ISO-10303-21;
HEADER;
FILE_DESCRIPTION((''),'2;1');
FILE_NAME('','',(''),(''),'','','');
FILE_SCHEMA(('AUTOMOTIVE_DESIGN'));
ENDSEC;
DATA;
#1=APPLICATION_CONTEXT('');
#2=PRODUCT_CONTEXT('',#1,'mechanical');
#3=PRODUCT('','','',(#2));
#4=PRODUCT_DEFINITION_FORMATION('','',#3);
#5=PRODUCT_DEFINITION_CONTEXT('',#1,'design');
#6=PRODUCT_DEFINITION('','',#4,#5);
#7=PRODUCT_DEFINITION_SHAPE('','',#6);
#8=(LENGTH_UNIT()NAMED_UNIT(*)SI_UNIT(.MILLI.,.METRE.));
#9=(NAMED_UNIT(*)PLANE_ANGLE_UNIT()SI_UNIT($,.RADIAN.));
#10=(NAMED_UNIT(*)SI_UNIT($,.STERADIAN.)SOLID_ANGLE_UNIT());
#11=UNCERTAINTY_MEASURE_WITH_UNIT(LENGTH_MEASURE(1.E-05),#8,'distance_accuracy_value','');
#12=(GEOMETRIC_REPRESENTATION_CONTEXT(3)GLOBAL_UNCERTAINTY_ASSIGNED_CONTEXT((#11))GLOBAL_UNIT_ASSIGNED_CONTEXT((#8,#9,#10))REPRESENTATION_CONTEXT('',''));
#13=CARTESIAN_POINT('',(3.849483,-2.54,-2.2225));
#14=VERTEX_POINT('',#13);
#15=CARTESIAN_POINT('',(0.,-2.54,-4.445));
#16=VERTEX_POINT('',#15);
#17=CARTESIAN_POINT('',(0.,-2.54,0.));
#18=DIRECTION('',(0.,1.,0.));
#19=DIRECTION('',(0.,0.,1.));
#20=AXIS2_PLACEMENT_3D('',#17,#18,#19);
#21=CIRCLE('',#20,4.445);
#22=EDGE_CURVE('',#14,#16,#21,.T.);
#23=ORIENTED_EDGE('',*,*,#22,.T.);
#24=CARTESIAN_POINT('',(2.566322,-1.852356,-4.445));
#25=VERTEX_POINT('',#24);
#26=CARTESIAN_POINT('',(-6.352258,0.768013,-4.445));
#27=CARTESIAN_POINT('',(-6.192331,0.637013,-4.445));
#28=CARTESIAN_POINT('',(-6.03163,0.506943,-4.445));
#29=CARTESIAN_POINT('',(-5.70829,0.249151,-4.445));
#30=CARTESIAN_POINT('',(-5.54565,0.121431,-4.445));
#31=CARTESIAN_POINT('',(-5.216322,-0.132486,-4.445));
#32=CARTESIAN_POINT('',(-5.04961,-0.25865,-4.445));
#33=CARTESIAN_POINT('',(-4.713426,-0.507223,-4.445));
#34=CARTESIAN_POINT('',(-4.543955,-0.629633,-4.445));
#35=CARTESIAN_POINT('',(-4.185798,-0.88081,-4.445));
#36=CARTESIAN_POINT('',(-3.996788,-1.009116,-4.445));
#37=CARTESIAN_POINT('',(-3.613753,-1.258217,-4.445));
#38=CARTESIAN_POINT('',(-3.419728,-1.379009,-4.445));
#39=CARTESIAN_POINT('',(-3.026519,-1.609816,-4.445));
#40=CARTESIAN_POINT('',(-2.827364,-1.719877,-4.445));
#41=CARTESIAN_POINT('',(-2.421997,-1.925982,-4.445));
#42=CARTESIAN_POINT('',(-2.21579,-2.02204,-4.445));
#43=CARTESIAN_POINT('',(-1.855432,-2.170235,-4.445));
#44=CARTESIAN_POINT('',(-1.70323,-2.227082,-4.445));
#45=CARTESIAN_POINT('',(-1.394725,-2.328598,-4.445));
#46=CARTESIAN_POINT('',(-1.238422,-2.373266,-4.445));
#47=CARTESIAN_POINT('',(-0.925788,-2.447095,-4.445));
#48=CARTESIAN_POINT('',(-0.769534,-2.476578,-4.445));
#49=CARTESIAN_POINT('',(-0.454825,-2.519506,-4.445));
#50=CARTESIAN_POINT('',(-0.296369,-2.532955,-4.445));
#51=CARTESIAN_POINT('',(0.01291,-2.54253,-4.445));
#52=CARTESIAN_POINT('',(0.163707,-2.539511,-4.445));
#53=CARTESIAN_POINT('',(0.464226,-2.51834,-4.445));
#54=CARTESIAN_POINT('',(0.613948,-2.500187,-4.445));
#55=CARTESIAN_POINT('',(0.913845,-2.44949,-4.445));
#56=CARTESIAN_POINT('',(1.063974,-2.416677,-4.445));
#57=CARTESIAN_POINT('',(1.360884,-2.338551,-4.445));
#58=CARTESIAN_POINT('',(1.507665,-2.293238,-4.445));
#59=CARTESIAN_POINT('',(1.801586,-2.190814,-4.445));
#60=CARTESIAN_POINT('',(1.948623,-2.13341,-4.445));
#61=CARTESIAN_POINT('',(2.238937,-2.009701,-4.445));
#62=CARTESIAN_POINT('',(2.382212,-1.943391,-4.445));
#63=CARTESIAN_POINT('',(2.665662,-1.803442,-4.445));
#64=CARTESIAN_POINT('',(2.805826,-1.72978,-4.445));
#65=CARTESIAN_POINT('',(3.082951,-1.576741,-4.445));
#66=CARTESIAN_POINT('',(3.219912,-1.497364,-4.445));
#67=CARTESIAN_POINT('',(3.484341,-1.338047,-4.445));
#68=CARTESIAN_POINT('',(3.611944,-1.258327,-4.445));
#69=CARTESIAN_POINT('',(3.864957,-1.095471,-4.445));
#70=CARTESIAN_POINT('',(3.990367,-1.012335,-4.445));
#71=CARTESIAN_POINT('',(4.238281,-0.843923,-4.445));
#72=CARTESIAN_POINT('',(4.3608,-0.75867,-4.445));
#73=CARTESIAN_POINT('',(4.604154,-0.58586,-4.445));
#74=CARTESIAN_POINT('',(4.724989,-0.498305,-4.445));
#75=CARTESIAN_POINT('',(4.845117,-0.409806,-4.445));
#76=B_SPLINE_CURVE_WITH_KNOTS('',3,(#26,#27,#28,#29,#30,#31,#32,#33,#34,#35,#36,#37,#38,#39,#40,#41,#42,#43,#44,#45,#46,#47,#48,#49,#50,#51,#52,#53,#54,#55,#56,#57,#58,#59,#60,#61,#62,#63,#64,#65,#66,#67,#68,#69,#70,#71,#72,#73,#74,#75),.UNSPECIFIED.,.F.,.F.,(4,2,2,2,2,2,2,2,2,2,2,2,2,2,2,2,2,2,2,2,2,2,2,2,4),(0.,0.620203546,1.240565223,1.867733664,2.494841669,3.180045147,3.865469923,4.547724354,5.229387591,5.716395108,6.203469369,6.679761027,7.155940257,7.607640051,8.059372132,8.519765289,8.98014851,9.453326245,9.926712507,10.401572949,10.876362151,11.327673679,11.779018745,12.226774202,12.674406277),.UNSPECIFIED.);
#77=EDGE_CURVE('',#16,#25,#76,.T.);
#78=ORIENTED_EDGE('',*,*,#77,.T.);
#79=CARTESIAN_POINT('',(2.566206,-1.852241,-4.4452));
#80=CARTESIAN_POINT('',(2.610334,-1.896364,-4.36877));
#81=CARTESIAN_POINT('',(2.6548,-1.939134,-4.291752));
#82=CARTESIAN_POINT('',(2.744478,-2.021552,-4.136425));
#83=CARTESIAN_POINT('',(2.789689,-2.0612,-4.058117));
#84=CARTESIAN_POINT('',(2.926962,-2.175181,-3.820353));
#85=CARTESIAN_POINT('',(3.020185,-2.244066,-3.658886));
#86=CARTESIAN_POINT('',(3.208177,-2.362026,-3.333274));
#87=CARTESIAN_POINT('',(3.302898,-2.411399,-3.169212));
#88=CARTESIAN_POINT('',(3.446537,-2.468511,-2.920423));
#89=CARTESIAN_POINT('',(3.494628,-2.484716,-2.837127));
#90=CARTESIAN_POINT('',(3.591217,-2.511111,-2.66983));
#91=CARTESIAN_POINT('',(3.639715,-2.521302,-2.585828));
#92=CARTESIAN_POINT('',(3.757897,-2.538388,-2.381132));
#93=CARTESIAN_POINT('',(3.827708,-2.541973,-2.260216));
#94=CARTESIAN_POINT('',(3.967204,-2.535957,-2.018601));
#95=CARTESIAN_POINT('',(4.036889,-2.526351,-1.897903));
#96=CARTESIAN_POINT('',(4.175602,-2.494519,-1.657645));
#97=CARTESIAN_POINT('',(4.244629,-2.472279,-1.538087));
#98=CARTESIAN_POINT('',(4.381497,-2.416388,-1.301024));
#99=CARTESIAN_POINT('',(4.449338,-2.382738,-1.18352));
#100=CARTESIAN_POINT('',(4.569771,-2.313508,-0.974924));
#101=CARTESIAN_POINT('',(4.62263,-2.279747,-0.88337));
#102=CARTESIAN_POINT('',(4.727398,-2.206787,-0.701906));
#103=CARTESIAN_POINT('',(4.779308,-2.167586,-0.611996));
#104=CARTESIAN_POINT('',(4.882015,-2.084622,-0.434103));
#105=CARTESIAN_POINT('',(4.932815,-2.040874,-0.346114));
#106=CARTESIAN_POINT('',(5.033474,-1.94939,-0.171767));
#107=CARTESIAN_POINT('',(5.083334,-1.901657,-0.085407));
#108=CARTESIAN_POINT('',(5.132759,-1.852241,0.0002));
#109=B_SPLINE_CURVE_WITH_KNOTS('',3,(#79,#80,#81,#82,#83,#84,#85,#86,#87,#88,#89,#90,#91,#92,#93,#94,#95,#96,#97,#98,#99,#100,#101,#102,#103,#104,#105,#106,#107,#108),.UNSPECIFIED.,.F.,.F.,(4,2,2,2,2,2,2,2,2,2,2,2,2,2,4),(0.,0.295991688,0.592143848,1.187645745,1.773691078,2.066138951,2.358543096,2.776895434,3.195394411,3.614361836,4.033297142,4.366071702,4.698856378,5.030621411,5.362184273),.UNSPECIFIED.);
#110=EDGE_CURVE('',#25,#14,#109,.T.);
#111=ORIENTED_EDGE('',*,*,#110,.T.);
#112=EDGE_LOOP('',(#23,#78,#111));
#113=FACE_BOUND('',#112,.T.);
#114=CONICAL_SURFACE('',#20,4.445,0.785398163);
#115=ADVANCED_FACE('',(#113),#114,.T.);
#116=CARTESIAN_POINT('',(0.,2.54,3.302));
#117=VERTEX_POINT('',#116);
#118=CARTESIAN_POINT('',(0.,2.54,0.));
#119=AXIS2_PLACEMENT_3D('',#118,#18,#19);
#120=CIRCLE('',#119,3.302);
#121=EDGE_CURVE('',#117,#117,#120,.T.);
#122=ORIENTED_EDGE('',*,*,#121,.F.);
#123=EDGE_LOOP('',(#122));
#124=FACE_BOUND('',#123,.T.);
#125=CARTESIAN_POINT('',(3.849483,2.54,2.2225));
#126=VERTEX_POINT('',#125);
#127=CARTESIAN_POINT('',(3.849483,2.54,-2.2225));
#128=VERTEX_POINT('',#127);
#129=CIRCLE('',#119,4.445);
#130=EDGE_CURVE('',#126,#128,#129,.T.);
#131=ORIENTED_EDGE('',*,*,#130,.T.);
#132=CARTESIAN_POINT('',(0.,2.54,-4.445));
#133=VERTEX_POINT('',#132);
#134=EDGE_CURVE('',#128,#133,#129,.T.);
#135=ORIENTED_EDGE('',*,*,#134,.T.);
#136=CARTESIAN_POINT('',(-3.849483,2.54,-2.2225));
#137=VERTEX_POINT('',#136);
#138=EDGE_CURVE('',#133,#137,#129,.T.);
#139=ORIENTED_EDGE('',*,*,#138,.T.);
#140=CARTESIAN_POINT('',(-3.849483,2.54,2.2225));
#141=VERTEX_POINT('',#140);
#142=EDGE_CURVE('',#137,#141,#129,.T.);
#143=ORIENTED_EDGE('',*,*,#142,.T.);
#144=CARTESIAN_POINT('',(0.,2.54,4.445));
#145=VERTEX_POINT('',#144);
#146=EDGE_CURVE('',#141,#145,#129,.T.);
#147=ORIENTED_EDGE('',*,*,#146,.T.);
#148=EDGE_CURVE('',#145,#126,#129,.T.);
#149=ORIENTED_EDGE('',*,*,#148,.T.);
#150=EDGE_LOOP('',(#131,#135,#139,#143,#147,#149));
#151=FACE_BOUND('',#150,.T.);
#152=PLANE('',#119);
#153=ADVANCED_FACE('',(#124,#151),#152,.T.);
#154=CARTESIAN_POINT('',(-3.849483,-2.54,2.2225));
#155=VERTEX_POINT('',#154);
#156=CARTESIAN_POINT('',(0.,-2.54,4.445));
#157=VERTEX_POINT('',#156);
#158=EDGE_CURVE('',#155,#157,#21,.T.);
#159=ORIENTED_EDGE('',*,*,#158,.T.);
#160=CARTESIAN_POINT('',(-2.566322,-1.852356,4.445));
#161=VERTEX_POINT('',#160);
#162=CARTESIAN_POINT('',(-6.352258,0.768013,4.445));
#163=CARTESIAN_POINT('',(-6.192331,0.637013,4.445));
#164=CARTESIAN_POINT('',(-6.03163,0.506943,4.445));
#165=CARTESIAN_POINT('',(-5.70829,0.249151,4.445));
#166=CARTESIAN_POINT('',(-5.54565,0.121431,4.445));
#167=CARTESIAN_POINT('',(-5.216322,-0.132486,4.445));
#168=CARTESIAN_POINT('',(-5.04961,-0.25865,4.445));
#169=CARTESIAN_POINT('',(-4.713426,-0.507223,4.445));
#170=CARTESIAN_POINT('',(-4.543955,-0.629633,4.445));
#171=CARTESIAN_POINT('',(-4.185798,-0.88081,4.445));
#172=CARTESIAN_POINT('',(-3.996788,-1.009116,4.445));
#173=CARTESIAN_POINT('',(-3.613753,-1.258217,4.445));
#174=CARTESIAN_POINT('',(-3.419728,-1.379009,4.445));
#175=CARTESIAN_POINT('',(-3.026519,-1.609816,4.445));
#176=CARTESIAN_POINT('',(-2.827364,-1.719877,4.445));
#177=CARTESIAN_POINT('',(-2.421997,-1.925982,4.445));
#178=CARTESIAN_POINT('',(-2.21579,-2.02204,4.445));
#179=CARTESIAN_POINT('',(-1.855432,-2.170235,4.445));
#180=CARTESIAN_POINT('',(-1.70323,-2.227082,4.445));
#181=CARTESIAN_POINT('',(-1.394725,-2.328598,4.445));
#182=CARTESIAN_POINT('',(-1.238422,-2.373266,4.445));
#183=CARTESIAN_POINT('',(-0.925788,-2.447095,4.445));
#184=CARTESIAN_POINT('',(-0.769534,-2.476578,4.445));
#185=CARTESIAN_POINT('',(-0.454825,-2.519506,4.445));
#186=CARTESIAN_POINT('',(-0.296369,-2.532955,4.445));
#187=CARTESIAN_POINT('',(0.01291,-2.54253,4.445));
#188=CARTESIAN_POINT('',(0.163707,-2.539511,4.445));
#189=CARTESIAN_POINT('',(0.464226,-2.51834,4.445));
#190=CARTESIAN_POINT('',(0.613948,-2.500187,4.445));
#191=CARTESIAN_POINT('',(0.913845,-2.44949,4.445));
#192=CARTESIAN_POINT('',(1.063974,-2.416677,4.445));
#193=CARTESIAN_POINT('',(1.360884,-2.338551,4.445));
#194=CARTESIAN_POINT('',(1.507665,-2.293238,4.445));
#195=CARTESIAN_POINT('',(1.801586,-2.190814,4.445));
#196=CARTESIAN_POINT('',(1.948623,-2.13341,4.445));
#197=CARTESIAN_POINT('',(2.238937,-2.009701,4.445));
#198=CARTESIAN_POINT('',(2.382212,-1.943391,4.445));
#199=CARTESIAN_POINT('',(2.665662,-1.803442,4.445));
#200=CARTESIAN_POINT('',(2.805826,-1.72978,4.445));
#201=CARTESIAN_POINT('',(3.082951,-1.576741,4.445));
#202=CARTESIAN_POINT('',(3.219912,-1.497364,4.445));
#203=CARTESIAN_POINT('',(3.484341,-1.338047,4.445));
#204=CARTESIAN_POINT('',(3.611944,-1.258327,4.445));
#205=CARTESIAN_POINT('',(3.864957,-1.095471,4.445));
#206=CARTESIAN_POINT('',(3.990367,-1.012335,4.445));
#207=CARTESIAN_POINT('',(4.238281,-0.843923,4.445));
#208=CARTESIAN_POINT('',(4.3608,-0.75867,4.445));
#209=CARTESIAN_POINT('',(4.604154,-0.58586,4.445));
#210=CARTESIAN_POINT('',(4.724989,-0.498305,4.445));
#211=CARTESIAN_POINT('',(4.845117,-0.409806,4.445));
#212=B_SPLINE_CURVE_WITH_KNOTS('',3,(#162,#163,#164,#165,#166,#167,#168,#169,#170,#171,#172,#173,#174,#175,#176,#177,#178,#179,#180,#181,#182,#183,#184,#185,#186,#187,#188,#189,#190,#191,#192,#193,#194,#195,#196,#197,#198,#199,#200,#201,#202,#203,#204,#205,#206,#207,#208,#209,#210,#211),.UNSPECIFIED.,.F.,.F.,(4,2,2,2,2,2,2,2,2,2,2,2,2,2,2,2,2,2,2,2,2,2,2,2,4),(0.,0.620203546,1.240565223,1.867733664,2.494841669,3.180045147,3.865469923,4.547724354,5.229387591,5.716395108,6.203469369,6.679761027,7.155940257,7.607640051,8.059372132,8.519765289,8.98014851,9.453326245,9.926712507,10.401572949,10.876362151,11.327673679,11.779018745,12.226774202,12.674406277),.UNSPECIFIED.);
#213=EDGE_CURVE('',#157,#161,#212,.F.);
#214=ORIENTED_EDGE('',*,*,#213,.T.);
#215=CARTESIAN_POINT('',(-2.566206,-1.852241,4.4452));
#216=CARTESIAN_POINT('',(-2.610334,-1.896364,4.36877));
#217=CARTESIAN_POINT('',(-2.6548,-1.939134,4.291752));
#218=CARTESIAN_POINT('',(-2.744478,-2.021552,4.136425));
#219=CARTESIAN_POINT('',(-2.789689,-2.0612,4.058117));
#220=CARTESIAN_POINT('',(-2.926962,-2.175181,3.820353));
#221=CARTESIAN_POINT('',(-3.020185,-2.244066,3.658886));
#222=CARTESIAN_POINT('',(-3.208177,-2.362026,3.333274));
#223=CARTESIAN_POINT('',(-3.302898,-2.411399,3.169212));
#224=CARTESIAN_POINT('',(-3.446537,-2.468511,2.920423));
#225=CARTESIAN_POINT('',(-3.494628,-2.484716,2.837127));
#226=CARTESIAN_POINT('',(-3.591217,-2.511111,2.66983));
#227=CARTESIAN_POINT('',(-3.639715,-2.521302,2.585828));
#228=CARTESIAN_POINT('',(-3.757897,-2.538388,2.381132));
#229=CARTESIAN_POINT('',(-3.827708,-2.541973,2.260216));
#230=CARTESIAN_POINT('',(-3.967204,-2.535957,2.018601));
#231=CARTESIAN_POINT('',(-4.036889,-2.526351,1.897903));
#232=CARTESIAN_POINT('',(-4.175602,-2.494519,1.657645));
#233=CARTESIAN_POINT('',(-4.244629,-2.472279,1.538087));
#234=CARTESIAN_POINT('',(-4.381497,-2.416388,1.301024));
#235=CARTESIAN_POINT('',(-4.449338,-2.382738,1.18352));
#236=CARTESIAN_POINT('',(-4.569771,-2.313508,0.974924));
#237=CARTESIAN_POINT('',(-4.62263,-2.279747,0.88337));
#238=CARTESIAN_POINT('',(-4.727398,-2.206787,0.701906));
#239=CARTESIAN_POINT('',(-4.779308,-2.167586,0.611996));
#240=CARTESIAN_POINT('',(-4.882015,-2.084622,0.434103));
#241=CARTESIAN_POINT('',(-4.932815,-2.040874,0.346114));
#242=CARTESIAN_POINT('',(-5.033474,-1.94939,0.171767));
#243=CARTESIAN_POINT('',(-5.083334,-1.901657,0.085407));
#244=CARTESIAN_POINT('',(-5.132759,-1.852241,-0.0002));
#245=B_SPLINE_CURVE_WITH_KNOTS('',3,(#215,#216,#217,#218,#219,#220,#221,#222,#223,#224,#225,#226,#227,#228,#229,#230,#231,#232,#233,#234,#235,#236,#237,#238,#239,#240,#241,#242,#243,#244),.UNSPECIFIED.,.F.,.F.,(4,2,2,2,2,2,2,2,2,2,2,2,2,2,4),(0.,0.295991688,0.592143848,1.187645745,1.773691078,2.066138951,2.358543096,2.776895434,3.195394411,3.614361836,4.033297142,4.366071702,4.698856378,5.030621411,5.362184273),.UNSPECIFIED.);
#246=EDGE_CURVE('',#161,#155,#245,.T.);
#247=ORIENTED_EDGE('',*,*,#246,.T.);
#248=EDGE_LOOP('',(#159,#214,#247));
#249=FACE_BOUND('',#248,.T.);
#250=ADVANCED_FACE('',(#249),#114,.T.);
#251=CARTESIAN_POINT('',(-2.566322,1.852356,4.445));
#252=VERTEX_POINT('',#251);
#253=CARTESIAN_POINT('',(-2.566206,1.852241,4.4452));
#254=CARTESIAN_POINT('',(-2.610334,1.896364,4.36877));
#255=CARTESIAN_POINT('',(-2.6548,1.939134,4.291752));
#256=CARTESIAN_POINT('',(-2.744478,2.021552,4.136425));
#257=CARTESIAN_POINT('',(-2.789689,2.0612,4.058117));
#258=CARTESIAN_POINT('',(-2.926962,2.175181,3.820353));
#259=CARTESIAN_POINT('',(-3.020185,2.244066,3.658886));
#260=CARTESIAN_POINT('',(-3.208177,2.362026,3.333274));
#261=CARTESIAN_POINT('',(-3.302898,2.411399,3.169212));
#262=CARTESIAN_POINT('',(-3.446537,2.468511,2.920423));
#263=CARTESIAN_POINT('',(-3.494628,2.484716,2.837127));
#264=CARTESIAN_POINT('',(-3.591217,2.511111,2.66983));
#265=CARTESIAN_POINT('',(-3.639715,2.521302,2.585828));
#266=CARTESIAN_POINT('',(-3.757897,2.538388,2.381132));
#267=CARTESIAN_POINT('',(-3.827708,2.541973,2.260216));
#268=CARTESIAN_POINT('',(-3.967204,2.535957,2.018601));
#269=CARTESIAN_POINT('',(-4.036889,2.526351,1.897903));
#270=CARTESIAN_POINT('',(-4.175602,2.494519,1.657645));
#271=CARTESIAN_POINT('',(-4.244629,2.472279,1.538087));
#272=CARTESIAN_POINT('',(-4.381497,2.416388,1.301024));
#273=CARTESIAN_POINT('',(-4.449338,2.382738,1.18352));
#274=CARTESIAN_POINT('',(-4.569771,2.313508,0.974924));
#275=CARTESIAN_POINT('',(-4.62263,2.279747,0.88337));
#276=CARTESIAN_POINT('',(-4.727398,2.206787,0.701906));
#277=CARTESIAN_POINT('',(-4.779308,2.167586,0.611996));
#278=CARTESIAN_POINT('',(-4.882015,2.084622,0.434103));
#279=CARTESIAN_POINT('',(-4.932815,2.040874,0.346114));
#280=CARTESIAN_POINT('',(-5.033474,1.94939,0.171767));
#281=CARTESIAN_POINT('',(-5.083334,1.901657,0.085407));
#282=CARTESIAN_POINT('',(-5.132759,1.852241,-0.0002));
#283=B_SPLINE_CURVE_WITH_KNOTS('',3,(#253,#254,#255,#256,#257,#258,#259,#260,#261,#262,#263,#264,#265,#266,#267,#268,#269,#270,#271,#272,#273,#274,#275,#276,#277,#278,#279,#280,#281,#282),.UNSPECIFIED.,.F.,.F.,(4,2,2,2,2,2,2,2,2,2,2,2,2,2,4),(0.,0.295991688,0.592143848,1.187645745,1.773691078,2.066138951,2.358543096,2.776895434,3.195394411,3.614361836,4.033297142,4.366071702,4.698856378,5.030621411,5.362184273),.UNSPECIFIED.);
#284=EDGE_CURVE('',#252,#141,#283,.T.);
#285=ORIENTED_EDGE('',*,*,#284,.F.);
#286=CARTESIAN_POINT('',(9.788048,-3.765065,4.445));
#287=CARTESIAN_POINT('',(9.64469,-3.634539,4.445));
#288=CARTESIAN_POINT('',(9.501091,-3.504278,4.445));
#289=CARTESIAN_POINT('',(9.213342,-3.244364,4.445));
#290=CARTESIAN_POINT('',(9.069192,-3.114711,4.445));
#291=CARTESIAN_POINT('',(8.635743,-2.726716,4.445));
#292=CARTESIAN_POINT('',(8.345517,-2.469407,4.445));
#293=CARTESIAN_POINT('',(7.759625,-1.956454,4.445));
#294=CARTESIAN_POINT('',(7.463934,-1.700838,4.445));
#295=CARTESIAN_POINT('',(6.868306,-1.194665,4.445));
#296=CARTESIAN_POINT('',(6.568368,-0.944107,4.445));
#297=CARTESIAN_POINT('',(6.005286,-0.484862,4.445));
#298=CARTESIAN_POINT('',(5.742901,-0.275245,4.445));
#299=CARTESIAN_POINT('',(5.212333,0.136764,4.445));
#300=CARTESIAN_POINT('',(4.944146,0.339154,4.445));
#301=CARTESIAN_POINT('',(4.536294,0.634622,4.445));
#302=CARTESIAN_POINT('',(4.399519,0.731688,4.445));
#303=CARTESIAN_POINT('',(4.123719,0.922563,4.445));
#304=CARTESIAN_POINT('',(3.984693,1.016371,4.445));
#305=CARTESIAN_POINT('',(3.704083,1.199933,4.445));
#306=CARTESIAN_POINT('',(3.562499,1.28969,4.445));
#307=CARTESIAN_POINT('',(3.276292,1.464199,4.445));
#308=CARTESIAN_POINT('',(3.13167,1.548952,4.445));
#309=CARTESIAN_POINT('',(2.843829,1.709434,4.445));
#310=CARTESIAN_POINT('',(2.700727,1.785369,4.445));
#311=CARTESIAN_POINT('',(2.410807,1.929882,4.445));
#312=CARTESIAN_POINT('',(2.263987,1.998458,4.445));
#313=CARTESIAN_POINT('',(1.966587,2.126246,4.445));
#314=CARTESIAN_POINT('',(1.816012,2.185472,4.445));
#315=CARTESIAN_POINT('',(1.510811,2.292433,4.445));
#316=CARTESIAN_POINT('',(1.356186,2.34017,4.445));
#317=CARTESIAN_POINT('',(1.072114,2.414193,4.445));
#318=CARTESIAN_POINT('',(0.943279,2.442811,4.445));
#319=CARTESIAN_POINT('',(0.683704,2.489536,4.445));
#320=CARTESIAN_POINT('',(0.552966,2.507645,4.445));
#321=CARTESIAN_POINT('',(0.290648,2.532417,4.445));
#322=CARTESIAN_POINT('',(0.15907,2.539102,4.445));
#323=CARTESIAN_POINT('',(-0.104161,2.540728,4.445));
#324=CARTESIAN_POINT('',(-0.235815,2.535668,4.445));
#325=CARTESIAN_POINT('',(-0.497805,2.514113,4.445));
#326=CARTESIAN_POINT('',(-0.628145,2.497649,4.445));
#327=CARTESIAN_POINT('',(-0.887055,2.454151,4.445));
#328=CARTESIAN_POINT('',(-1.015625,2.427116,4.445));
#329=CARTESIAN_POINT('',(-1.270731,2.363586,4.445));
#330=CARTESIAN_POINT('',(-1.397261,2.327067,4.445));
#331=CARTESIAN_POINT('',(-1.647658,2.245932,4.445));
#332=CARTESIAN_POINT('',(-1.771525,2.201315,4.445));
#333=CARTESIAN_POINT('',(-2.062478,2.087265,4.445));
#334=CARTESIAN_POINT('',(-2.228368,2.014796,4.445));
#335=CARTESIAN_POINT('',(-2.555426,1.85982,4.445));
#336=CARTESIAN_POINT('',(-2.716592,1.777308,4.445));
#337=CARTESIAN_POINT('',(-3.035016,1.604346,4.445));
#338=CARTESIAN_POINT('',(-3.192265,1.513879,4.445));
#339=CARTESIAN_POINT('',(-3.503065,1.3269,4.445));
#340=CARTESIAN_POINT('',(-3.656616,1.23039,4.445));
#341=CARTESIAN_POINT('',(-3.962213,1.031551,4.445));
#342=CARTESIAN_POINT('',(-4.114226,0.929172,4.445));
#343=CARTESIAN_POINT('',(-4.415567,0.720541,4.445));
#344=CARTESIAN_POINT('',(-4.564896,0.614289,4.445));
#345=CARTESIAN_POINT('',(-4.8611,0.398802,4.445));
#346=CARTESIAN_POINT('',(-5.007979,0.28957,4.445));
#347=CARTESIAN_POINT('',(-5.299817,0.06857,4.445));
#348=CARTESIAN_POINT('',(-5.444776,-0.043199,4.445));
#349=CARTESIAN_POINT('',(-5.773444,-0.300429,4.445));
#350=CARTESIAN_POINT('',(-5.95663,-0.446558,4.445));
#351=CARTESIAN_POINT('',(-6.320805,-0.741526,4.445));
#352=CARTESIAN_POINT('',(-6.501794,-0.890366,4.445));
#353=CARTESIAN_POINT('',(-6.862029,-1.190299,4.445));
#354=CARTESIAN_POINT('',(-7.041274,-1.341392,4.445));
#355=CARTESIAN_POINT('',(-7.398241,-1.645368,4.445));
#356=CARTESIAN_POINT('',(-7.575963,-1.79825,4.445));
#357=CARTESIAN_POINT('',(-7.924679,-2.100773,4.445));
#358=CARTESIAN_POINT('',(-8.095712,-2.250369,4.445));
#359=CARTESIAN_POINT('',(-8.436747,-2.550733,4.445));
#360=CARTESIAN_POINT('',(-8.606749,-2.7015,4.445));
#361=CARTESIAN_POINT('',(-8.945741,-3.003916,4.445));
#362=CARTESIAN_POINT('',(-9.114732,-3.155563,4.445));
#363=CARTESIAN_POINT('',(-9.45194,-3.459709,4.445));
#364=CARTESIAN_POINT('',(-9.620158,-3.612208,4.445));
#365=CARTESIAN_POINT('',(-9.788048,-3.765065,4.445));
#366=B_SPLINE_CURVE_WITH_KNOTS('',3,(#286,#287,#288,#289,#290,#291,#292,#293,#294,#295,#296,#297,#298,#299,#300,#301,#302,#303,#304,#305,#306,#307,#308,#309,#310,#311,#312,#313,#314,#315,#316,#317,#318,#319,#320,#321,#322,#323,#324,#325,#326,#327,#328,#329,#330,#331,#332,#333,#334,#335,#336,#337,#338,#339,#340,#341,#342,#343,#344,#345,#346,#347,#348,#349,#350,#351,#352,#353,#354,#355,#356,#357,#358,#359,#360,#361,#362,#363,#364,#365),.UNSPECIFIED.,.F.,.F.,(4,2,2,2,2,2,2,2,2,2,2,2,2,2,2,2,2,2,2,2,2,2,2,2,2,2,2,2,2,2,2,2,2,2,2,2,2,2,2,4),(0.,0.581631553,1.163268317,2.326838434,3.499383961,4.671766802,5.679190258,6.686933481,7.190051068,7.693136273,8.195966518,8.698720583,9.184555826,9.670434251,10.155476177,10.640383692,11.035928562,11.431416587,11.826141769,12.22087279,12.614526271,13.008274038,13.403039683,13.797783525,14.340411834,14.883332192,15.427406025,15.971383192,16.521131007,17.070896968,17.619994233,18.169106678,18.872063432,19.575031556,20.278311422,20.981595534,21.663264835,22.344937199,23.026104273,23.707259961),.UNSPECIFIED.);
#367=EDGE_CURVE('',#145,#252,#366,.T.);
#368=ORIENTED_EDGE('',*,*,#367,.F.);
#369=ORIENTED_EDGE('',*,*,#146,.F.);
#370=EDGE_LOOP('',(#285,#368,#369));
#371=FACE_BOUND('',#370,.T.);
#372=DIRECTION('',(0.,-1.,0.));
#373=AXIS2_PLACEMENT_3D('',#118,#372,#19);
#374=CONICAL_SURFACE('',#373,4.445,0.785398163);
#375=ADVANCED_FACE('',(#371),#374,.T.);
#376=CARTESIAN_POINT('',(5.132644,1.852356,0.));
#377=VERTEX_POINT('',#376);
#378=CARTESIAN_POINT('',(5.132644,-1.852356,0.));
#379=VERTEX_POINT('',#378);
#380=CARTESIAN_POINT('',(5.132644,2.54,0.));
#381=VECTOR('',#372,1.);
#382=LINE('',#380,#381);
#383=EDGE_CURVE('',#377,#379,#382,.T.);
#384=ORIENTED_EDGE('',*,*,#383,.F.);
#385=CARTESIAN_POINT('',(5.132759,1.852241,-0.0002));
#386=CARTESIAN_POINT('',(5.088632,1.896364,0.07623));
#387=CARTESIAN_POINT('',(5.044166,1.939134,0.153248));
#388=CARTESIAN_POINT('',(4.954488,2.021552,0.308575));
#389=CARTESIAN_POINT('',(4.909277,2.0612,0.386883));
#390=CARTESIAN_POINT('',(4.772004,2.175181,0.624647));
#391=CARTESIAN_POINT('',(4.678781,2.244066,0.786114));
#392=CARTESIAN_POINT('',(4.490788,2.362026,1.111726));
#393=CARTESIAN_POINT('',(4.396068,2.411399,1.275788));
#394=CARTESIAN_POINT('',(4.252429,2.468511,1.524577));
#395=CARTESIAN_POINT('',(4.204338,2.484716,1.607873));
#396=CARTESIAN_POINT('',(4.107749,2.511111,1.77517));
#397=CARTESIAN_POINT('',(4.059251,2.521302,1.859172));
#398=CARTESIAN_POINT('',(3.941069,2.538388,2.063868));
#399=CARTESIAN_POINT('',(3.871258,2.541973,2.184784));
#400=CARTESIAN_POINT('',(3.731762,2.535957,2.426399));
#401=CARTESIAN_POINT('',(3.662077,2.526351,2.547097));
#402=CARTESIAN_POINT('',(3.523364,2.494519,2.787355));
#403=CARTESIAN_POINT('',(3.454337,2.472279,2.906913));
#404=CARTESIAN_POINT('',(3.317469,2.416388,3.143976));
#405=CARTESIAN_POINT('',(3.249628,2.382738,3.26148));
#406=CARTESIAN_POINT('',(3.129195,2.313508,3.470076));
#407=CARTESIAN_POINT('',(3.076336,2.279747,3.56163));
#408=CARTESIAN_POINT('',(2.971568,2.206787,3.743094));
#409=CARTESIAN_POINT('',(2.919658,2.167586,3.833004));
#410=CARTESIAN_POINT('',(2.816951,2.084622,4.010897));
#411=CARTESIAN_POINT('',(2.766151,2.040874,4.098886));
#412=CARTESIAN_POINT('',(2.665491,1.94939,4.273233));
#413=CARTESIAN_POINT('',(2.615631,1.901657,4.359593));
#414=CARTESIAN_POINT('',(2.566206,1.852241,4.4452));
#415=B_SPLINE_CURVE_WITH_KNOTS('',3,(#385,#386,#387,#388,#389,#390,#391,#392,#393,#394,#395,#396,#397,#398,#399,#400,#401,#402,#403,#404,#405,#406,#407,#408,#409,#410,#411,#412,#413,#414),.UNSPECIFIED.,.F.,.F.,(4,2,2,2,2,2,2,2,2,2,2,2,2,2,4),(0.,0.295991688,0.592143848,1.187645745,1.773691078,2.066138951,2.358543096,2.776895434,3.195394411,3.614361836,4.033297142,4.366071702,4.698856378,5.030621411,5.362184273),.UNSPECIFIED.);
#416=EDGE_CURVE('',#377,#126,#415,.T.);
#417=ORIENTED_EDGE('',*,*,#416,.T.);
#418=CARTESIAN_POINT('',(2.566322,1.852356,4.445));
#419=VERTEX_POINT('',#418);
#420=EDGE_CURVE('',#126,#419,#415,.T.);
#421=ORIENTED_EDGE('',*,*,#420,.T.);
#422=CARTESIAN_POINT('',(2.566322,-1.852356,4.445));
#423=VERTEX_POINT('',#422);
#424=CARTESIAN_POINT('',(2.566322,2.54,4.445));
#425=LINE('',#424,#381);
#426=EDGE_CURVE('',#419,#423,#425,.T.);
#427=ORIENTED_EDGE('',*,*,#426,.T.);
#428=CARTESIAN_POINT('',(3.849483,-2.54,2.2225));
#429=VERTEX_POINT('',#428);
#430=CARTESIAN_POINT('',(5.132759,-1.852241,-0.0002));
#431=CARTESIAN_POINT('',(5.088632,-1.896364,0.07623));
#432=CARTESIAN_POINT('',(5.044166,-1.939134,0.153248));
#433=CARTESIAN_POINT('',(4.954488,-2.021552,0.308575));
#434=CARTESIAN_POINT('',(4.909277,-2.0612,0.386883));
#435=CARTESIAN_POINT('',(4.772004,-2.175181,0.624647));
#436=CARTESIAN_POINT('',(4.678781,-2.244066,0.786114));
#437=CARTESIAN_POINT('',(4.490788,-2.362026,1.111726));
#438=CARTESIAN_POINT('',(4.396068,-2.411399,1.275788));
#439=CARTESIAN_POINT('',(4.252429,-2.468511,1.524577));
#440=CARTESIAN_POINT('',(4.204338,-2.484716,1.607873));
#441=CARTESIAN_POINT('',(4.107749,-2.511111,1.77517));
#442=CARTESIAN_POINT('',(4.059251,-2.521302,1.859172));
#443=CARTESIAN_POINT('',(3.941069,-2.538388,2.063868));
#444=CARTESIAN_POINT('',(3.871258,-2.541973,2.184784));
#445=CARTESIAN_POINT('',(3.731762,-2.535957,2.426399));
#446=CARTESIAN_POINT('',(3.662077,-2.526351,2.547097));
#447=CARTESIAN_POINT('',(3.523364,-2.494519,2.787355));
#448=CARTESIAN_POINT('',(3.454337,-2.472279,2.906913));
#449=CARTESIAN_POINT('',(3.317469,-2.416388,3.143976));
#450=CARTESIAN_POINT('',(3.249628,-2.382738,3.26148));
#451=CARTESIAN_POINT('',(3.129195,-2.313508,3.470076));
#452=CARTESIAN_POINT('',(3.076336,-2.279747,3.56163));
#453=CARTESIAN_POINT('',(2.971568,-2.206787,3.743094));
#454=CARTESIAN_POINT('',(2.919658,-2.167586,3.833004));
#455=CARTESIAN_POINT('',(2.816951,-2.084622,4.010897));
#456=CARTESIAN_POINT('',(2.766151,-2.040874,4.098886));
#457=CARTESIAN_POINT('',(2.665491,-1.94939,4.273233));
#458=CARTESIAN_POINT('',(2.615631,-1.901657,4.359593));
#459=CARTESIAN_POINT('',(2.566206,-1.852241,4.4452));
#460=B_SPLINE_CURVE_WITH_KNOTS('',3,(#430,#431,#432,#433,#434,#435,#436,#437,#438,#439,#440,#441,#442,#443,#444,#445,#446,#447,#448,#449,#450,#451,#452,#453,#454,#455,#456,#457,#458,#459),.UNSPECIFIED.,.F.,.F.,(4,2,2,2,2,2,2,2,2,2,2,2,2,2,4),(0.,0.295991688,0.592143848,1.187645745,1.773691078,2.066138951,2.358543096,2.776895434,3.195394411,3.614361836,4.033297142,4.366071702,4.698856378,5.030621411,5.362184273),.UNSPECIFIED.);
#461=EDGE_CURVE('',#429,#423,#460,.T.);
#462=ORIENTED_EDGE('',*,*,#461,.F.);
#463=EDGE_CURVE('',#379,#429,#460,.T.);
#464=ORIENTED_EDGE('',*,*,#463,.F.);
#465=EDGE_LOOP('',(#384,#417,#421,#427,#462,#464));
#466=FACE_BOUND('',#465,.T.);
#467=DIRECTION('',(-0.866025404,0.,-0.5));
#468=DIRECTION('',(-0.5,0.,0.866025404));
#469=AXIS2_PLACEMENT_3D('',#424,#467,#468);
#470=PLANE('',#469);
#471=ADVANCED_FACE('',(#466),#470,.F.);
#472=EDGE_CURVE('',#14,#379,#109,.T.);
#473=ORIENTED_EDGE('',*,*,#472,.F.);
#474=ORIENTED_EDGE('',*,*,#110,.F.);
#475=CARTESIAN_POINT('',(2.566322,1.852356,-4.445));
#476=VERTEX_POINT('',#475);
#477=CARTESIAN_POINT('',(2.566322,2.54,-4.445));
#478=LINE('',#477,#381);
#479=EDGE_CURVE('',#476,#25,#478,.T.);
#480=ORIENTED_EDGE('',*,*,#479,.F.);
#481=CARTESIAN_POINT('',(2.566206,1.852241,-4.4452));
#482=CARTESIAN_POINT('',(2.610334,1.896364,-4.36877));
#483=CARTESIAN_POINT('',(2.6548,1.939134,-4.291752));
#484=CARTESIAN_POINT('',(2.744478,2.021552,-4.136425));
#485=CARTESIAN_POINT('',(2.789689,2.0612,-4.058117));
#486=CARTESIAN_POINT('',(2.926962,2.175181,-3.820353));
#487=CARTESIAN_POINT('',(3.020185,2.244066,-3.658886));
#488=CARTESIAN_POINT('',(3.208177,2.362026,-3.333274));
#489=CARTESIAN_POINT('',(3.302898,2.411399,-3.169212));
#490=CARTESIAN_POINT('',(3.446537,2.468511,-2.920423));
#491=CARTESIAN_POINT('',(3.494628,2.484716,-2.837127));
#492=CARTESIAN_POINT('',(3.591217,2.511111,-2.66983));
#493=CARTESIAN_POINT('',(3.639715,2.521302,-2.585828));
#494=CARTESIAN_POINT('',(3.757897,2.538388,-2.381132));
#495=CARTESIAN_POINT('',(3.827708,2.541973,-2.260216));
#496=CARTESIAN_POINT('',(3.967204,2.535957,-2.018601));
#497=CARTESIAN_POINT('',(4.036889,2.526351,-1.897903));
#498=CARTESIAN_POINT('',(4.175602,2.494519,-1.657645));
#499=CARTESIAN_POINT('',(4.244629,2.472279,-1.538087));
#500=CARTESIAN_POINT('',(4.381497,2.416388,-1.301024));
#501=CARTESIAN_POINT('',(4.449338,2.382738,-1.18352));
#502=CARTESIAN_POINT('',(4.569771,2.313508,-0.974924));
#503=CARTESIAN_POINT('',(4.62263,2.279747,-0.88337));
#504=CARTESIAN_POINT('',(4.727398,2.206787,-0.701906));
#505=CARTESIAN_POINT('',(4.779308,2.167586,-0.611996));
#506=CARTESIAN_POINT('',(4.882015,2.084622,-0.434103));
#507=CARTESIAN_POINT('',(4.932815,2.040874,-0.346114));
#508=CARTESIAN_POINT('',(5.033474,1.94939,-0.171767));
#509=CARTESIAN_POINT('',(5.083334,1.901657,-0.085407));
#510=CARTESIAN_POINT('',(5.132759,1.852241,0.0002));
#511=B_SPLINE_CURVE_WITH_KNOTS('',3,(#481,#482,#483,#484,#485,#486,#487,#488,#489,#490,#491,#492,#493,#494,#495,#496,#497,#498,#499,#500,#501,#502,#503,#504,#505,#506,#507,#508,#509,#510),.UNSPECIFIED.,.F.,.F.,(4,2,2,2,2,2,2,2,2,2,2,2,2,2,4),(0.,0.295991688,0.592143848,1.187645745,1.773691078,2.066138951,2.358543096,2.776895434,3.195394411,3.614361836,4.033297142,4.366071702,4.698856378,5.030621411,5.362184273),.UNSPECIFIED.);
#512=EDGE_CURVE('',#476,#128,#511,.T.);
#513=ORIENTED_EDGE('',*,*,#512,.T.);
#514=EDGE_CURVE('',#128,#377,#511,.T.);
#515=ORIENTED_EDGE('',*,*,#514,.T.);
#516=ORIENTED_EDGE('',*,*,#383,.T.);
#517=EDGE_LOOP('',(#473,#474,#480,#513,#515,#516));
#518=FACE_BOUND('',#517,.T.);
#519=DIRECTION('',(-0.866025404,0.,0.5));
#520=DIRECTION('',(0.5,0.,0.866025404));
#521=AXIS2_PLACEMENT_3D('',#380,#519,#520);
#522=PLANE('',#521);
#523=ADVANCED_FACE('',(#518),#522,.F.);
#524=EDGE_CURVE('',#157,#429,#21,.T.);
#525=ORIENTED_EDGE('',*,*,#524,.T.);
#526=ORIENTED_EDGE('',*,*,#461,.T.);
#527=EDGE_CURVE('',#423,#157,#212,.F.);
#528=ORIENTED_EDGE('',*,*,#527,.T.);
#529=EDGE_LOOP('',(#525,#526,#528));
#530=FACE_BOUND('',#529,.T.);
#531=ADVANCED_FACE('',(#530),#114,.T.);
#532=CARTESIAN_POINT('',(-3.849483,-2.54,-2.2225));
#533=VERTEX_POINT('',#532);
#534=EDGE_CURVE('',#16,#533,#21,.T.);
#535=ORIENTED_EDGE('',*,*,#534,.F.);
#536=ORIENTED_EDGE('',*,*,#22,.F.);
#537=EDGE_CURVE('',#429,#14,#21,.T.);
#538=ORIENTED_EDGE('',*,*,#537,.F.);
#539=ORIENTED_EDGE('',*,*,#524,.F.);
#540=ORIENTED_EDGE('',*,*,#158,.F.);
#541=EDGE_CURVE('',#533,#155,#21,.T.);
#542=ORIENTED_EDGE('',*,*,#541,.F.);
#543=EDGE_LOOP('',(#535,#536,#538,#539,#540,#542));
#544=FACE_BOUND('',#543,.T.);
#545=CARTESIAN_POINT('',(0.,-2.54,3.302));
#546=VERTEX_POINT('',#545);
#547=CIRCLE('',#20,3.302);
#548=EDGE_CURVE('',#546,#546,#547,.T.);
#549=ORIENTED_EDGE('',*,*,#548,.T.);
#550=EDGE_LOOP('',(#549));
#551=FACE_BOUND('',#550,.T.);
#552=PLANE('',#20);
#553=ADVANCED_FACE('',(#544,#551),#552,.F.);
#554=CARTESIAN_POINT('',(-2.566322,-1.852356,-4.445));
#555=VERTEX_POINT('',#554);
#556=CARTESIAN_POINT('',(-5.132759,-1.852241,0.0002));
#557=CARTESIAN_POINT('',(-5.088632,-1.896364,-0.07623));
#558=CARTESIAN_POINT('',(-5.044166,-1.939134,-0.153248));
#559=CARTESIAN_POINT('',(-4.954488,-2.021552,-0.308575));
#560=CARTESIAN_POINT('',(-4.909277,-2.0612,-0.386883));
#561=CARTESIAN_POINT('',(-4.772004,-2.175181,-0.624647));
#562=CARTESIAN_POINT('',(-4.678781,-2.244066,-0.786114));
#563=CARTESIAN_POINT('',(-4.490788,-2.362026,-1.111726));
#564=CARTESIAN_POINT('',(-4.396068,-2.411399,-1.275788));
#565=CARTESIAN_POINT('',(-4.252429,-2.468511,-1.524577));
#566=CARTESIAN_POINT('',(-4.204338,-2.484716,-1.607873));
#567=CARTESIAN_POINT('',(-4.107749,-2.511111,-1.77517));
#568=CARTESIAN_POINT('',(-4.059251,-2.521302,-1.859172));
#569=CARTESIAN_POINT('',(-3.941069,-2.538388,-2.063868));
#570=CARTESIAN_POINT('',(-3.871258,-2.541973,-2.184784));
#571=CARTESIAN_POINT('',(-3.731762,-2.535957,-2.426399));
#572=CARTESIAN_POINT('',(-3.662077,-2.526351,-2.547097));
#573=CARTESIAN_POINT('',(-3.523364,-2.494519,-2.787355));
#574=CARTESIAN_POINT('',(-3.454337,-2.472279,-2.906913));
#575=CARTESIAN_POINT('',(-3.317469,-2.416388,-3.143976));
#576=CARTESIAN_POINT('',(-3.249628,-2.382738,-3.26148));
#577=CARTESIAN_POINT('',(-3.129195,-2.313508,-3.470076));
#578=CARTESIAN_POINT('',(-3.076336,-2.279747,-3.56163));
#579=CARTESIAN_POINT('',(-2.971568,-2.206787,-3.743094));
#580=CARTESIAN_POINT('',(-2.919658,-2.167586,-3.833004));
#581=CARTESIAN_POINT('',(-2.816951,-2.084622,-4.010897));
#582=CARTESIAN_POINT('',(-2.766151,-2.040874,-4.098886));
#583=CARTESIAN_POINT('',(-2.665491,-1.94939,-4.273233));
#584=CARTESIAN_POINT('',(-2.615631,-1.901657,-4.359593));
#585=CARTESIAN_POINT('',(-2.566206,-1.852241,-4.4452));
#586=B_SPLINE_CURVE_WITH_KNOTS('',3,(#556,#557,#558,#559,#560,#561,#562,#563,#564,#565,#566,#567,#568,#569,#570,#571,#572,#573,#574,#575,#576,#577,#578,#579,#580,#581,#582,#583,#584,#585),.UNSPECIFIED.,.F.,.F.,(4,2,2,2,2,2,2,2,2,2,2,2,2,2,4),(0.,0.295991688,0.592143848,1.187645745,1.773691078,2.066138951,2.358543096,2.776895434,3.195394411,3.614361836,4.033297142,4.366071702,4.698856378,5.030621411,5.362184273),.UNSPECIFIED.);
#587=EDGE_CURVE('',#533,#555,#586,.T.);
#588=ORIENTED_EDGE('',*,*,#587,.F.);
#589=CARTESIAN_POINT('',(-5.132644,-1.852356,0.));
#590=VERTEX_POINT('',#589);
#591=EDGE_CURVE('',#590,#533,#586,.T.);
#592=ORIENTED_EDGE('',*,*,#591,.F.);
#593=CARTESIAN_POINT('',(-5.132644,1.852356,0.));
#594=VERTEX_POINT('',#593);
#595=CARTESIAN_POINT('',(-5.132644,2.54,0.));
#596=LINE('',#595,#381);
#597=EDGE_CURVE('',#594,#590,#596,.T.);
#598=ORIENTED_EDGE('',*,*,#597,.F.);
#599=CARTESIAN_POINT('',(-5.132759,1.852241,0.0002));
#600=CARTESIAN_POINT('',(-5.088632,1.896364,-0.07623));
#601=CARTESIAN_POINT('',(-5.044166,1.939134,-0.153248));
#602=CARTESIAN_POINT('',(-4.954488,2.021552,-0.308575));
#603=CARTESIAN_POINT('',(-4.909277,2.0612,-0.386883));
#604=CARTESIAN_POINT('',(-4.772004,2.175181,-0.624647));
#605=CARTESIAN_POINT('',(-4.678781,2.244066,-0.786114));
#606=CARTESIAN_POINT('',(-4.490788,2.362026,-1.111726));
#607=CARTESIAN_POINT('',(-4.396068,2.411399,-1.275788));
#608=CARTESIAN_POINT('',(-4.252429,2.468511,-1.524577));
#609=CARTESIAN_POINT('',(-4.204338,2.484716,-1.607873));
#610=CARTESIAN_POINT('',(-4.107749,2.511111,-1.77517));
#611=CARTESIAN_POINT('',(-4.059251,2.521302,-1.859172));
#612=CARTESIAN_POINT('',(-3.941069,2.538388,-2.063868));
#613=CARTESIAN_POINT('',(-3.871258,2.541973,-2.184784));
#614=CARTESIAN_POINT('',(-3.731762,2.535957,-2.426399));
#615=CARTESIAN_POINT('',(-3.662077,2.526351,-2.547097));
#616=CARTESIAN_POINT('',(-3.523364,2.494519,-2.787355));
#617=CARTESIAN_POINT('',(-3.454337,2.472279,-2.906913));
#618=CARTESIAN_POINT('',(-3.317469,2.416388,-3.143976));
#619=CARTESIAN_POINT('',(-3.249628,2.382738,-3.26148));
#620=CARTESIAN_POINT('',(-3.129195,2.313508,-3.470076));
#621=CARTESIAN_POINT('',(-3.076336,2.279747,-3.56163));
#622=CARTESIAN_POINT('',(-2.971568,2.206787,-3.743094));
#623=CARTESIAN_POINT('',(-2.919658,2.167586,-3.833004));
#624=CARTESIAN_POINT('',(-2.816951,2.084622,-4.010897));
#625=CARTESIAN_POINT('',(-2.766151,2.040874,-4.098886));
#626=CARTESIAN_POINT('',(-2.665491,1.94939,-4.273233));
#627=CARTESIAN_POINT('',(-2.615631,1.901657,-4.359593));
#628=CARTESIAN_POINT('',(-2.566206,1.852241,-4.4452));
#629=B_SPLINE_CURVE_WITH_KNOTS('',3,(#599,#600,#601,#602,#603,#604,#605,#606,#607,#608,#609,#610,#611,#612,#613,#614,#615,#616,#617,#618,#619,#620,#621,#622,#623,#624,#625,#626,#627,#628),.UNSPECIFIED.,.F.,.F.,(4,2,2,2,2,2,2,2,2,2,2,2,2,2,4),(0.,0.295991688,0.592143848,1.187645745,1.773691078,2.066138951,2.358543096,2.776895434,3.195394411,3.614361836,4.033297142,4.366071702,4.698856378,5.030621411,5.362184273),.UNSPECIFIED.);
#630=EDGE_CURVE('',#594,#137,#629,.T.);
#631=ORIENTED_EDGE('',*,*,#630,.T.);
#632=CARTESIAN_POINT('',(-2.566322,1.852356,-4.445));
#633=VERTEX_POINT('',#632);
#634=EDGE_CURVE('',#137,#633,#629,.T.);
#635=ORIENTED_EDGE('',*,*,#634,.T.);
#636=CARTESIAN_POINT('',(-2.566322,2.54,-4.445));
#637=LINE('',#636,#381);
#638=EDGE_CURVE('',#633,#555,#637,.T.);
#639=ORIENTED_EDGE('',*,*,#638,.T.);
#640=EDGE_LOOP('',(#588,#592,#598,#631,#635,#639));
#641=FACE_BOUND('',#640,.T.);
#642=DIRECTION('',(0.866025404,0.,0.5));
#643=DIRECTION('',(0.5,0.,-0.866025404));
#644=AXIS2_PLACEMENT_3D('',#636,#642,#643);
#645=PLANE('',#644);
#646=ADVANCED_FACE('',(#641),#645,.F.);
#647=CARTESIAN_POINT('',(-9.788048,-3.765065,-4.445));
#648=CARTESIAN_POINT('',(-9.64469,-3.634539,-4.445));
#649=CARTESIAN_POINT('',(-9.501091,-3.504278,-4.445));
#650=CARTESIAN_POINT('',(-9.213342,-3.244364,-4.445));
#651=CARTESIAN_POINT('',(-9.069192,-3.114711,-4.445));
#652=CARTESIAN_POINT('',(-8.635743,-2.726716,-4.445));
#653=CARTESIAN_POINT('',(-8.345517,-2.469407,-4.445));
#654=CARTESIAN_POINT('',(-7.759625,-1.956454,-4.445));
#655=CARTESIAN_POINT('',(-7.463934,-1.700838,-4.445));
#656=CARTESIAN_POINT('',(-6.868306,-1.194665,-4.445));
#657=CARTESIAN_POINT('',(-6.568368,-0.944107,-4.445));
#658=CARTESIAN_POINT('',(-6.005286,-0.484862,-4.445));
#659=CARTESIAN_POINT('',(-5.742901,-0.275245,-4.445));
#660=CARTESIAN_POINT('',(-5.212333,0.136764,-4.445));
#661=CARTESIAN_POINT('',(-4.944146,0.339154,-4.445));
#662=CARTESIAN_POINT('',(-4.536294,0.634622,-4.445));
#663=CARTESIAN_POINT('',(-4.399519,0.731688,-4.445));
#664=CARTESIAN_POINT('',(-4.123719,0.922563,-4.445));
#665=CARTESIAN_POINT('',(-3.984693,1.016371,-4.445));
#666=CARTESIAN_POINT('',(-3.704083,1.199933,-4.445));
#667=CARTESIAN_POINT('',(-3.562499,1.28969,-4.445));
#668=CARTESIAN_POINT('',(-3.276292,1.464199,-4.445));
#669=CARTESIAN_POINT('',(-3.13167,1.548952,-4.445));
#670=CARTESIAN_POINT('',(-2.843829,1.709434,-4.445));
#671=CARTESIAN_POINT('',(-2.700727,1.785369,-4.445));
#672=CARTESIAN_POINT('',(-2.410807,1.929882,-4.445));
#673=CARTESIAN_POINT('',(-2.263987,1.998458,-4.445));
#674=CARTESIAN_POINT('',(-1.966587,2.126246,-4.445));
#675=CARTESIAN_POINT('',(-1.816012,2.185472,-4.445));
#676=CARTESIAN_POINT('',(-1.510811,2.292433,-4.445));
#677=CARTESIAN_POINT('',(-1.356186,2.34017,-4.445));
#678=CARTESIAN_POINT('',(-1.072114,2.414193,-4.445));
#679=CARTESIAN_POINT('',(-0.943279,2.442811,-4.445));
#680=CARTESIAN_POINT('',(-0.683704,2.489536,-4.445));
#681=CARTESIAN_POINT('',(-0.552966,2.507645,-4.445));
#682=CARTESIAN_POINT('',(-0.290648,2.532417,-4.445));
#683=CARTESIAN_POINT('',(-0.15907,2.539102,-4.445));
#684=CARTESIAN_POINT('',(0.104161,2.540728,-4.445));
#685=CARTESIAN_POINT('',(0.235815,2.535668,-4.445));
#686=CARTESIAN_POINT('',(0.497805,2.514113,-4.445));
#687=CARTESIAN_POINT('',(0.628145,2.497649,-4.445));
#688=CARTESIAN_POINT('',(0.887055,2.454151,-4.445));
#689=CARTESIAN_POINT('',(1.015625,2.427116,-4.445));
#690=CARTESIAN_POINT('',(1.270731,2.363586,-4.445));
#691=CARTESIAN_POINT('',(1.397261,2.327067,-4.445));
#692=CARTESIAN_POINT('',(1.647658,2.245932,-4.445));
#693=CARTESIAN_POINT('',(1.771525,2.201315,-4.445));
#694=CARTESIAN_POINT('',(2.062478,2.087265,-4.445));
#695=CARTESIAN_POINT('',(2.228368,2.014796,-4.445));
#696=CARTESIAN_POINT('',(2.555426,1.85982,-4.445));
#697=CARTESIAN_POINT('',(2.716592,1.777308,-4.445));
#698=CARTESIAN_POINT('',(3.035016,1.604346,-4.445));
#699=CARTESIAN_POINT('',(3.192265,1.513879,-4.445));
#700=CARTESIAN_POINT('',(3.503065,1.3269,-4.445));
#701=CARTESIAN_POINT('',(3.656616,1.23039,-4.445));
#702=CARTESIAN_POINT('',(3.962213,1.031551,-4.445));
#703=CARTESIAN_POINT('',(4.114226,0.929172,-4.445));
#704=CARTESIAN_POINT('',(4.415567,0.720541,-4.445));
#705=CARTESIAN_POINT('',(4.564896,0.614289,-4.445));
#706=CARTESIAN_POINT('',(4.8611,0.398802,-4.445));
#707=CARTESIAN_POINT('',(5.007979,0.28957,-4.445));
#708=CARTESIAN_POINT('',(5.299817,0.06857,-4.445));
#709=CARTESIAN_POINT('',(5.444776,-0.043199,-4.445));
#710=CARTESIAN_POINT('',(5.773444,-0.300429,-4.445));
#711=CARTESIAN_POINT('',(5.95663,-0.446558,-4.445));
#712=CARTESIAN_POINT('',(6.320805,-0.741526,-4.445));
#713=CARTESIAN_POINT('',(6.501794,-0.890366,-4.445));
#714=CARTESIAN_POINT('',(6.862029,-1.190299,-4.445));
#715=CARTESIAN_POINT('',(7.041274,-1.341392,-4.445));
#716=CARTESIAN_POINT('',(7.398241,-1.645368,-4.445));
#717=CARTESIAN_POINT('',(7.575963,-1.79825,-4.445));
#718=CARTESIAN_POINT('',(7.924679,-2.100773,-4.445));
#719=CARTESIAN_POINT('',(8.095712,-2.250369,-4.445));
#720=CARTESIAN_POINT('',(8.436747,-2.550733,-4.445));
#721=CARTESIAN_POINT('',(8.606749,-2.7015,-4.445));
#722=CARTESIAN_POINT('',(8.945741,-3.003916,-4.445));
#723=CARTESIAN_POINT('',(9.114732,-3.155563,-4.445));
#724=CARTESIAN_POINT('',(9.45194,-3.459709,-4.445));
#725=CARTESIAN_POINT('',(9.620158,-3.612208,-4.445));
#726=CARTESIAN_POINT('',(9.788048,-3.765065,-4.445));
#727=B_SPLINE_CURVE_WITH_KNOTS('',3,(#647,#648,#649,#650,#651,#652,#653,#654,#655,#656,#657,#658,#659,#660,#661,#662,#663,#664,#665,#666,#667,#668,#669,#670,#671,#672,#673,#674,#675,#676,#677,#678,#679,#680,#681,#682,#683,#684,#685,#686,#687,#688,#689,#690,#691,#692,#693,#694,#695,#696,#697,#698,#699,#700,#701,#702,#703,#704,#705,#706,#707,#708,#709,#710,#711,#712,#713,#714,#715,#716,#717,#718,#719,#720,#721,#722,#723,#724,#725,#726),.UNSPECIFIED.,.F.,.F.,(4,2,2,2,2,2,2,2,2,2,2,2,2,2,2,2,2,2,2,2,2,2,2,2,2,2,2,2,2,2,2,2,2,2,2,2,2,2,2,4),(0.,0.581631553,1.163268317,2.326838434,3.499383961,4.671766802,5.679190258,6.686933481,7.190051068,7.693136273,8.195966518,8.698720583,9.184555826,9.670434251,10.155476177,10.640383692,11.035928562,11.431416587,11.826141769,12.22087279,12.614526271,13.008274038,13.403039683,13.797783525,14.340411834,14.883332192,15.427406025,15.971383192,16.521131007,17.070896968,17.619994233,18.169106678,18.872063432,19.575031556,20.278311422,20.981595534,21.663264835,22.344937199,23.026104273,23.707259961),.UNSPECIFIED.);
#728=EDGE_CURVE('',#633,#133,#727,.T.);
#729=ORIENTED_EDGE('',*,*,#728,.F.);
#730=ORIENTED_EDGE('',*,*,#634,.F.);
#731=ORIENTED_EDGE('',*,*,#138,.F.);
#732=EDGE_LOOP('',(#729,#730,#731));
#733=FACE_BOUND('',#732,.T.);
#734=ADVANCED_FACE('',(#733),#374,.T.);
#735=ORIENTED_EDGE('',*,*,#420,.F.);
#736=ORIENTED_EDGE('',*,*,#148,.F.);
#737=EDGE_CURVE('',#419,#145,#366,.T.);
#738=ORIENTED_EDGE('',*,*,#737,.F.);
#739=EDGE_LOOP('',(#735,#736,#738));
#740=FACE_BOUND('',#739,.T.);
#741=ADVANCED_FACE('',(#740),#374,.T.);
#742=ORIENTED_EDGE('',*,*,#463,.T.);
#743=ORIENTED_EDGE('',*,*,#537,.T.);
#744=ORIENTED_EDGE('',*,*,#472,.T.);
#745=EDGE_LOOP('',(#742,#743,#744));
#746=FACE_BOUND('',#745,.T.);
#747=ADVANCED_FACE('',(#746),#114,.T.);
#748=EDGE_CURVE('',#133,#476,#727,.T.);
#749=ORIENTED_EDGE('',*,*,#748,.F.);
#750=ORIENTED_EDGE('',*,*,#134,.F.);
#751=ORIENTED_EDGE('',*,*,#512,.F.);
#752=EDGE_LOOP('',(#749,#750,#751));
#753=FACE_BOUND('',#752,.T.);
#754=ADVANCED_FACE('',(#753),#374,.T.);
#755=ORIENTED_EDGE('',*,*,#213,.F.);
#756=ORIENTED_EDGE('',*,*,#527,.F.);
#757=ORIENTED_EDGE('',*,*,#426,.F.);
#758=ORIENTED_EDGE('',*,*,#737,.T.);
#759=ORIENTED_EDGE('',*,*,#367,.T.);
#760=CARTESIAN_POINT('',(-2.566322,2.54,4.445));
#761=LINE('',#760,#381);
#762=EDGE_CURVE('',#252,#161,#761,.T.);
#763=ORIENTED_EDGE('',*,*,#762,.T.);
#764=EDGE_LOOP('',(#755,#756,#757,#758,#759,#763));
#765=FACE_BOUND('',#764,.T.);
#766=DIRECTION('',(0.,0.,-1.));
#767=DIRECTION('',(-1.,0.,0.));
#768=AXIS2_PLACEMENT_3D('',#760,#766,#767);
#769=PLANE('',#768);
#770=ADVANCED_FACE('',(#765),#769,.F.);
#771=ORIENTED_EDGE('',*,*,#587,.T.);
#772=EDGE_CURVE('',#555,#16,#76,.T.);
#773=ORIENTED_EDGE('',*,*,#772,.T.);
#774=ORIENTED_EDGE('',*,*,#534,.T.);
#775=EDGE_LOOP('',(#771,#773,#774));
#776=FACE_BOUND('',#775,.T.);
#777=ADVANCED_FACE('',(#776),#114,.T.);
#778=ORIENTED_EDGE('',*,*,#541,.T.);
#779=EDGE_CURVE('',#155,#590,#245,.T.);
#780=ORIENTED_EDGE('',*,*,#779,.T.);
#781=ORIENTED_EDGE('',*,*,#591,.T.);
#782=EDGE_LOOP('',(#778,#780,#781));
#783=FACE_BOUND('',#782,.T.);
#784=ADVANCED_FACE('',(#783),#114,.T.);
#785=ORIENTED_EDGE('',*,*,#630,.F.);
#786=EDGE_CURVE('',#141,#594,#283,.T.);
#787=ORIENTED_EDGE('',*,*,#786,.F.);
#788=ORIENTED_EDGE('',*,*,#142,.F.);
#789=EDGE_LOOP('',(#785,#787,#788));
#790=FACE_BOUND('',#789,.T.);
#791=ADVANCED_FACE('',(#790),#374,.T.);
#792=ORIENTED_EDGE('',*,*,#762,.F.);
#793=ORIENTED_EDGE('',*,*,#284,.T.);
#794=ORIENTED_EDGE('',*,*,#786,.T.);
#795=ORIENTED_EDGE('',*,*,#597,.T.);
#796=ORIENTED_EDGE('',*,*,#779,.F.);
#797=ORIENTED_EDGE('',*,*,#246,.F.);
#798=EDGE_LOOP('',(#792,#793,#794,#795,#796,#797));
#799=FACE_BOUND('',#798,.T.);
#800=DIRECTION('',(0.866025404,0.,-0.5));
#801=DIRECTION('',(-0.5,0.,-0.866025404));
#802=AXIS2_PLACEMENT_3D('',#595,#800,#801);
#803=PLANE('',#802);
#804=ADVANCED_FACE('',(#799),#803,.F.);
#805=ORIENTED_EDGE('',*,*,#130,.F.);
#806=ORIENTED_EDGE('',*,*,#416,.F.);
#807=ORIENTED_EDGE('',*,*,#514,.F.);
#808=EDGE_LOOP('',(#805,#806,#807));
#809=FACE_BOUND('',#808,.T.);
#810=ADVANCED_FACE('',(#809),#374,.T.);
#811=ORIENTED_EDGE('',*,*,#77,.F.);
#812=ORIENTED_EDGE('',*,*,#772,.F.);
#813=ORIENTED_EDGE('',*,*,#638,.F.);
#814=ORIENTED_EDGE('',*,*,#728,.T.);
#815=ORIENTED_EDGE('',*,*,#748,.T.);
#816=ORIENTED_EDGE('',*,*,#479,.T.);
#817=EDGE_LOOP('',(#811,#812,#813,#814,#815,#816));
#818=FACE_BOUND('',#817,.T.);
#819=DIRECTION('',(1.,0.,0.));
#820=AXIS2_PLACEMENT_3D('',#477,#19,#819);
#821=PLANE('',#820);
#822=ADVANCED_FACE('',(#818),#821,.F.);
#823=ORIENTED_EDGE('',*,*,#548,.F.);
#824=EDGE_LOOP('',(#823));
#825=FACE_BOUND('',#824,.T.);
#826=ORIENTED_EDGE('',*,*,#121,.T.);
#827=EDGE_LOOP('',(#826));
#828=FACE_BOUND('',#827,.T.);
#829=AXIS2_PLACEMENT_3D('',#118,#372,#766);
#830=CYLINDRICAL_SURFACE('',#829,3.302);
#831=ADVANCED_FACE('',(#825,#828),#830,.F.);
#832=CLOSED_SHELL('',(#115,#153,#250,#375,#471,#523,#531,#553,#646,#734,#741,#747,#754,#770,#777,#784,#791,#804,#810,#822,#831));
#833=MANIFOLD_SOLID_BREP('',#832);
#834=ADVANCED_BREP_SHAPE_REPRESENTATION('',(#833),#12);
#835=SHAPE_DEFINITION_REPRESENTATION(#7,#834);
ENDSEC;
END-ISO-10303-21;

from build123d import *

# Parameters (mm, degrees)
SKETCH1_R           = 3.302
BOSS_EXTRUDE1_DEPTH = 2.54


# Read off the part's stored shape, not the designer's step: Cut-Extrude1
with BuildPart() as part:
    # Sketch1 → Boss-Extrude1 (new, symmetric)
    with BuildSketch(Plane(origin=(0, 0, 0), x_dir=(1, 0, 0), z_dir=(0, 1, 0))):
        Polygon((5.132643893, 0), (2.566321947, 4.445), (-2.566321947, 4.445), (-5.132643893, 0), (-2.566321947, -4.445), (2.566321947, -4.445), align=None)
        with Locations(Location((0, 0, 0), (0, 0, 270))):
            Circle(SKETCH1_R, mode=Mode.SUBTRACT)
    extrude(amount=BOSS_EXTRUDE1_DEPTH, both=True)

    # Cut-Extrude1 outline → Cut-Extrude1 (revolve, cut)
    with BuildSketch(Plane.XY):
        Polygon((5.132643901, 2.540000192), (4.444999936, 2.540000192), (5.132643898, 1.852356102), align=None)
    cut_extrude1 = revolve(axis=Axis((0, 0, 0), (0, 1, 0)), mode=Mode.SUBTRACT)

    # Mirror1: Cut-Extrude1 across plane
    add(cut_extrude1.mirror(Plane.ZX), mode=Mode.SUBTRACT)


solid = part.part
